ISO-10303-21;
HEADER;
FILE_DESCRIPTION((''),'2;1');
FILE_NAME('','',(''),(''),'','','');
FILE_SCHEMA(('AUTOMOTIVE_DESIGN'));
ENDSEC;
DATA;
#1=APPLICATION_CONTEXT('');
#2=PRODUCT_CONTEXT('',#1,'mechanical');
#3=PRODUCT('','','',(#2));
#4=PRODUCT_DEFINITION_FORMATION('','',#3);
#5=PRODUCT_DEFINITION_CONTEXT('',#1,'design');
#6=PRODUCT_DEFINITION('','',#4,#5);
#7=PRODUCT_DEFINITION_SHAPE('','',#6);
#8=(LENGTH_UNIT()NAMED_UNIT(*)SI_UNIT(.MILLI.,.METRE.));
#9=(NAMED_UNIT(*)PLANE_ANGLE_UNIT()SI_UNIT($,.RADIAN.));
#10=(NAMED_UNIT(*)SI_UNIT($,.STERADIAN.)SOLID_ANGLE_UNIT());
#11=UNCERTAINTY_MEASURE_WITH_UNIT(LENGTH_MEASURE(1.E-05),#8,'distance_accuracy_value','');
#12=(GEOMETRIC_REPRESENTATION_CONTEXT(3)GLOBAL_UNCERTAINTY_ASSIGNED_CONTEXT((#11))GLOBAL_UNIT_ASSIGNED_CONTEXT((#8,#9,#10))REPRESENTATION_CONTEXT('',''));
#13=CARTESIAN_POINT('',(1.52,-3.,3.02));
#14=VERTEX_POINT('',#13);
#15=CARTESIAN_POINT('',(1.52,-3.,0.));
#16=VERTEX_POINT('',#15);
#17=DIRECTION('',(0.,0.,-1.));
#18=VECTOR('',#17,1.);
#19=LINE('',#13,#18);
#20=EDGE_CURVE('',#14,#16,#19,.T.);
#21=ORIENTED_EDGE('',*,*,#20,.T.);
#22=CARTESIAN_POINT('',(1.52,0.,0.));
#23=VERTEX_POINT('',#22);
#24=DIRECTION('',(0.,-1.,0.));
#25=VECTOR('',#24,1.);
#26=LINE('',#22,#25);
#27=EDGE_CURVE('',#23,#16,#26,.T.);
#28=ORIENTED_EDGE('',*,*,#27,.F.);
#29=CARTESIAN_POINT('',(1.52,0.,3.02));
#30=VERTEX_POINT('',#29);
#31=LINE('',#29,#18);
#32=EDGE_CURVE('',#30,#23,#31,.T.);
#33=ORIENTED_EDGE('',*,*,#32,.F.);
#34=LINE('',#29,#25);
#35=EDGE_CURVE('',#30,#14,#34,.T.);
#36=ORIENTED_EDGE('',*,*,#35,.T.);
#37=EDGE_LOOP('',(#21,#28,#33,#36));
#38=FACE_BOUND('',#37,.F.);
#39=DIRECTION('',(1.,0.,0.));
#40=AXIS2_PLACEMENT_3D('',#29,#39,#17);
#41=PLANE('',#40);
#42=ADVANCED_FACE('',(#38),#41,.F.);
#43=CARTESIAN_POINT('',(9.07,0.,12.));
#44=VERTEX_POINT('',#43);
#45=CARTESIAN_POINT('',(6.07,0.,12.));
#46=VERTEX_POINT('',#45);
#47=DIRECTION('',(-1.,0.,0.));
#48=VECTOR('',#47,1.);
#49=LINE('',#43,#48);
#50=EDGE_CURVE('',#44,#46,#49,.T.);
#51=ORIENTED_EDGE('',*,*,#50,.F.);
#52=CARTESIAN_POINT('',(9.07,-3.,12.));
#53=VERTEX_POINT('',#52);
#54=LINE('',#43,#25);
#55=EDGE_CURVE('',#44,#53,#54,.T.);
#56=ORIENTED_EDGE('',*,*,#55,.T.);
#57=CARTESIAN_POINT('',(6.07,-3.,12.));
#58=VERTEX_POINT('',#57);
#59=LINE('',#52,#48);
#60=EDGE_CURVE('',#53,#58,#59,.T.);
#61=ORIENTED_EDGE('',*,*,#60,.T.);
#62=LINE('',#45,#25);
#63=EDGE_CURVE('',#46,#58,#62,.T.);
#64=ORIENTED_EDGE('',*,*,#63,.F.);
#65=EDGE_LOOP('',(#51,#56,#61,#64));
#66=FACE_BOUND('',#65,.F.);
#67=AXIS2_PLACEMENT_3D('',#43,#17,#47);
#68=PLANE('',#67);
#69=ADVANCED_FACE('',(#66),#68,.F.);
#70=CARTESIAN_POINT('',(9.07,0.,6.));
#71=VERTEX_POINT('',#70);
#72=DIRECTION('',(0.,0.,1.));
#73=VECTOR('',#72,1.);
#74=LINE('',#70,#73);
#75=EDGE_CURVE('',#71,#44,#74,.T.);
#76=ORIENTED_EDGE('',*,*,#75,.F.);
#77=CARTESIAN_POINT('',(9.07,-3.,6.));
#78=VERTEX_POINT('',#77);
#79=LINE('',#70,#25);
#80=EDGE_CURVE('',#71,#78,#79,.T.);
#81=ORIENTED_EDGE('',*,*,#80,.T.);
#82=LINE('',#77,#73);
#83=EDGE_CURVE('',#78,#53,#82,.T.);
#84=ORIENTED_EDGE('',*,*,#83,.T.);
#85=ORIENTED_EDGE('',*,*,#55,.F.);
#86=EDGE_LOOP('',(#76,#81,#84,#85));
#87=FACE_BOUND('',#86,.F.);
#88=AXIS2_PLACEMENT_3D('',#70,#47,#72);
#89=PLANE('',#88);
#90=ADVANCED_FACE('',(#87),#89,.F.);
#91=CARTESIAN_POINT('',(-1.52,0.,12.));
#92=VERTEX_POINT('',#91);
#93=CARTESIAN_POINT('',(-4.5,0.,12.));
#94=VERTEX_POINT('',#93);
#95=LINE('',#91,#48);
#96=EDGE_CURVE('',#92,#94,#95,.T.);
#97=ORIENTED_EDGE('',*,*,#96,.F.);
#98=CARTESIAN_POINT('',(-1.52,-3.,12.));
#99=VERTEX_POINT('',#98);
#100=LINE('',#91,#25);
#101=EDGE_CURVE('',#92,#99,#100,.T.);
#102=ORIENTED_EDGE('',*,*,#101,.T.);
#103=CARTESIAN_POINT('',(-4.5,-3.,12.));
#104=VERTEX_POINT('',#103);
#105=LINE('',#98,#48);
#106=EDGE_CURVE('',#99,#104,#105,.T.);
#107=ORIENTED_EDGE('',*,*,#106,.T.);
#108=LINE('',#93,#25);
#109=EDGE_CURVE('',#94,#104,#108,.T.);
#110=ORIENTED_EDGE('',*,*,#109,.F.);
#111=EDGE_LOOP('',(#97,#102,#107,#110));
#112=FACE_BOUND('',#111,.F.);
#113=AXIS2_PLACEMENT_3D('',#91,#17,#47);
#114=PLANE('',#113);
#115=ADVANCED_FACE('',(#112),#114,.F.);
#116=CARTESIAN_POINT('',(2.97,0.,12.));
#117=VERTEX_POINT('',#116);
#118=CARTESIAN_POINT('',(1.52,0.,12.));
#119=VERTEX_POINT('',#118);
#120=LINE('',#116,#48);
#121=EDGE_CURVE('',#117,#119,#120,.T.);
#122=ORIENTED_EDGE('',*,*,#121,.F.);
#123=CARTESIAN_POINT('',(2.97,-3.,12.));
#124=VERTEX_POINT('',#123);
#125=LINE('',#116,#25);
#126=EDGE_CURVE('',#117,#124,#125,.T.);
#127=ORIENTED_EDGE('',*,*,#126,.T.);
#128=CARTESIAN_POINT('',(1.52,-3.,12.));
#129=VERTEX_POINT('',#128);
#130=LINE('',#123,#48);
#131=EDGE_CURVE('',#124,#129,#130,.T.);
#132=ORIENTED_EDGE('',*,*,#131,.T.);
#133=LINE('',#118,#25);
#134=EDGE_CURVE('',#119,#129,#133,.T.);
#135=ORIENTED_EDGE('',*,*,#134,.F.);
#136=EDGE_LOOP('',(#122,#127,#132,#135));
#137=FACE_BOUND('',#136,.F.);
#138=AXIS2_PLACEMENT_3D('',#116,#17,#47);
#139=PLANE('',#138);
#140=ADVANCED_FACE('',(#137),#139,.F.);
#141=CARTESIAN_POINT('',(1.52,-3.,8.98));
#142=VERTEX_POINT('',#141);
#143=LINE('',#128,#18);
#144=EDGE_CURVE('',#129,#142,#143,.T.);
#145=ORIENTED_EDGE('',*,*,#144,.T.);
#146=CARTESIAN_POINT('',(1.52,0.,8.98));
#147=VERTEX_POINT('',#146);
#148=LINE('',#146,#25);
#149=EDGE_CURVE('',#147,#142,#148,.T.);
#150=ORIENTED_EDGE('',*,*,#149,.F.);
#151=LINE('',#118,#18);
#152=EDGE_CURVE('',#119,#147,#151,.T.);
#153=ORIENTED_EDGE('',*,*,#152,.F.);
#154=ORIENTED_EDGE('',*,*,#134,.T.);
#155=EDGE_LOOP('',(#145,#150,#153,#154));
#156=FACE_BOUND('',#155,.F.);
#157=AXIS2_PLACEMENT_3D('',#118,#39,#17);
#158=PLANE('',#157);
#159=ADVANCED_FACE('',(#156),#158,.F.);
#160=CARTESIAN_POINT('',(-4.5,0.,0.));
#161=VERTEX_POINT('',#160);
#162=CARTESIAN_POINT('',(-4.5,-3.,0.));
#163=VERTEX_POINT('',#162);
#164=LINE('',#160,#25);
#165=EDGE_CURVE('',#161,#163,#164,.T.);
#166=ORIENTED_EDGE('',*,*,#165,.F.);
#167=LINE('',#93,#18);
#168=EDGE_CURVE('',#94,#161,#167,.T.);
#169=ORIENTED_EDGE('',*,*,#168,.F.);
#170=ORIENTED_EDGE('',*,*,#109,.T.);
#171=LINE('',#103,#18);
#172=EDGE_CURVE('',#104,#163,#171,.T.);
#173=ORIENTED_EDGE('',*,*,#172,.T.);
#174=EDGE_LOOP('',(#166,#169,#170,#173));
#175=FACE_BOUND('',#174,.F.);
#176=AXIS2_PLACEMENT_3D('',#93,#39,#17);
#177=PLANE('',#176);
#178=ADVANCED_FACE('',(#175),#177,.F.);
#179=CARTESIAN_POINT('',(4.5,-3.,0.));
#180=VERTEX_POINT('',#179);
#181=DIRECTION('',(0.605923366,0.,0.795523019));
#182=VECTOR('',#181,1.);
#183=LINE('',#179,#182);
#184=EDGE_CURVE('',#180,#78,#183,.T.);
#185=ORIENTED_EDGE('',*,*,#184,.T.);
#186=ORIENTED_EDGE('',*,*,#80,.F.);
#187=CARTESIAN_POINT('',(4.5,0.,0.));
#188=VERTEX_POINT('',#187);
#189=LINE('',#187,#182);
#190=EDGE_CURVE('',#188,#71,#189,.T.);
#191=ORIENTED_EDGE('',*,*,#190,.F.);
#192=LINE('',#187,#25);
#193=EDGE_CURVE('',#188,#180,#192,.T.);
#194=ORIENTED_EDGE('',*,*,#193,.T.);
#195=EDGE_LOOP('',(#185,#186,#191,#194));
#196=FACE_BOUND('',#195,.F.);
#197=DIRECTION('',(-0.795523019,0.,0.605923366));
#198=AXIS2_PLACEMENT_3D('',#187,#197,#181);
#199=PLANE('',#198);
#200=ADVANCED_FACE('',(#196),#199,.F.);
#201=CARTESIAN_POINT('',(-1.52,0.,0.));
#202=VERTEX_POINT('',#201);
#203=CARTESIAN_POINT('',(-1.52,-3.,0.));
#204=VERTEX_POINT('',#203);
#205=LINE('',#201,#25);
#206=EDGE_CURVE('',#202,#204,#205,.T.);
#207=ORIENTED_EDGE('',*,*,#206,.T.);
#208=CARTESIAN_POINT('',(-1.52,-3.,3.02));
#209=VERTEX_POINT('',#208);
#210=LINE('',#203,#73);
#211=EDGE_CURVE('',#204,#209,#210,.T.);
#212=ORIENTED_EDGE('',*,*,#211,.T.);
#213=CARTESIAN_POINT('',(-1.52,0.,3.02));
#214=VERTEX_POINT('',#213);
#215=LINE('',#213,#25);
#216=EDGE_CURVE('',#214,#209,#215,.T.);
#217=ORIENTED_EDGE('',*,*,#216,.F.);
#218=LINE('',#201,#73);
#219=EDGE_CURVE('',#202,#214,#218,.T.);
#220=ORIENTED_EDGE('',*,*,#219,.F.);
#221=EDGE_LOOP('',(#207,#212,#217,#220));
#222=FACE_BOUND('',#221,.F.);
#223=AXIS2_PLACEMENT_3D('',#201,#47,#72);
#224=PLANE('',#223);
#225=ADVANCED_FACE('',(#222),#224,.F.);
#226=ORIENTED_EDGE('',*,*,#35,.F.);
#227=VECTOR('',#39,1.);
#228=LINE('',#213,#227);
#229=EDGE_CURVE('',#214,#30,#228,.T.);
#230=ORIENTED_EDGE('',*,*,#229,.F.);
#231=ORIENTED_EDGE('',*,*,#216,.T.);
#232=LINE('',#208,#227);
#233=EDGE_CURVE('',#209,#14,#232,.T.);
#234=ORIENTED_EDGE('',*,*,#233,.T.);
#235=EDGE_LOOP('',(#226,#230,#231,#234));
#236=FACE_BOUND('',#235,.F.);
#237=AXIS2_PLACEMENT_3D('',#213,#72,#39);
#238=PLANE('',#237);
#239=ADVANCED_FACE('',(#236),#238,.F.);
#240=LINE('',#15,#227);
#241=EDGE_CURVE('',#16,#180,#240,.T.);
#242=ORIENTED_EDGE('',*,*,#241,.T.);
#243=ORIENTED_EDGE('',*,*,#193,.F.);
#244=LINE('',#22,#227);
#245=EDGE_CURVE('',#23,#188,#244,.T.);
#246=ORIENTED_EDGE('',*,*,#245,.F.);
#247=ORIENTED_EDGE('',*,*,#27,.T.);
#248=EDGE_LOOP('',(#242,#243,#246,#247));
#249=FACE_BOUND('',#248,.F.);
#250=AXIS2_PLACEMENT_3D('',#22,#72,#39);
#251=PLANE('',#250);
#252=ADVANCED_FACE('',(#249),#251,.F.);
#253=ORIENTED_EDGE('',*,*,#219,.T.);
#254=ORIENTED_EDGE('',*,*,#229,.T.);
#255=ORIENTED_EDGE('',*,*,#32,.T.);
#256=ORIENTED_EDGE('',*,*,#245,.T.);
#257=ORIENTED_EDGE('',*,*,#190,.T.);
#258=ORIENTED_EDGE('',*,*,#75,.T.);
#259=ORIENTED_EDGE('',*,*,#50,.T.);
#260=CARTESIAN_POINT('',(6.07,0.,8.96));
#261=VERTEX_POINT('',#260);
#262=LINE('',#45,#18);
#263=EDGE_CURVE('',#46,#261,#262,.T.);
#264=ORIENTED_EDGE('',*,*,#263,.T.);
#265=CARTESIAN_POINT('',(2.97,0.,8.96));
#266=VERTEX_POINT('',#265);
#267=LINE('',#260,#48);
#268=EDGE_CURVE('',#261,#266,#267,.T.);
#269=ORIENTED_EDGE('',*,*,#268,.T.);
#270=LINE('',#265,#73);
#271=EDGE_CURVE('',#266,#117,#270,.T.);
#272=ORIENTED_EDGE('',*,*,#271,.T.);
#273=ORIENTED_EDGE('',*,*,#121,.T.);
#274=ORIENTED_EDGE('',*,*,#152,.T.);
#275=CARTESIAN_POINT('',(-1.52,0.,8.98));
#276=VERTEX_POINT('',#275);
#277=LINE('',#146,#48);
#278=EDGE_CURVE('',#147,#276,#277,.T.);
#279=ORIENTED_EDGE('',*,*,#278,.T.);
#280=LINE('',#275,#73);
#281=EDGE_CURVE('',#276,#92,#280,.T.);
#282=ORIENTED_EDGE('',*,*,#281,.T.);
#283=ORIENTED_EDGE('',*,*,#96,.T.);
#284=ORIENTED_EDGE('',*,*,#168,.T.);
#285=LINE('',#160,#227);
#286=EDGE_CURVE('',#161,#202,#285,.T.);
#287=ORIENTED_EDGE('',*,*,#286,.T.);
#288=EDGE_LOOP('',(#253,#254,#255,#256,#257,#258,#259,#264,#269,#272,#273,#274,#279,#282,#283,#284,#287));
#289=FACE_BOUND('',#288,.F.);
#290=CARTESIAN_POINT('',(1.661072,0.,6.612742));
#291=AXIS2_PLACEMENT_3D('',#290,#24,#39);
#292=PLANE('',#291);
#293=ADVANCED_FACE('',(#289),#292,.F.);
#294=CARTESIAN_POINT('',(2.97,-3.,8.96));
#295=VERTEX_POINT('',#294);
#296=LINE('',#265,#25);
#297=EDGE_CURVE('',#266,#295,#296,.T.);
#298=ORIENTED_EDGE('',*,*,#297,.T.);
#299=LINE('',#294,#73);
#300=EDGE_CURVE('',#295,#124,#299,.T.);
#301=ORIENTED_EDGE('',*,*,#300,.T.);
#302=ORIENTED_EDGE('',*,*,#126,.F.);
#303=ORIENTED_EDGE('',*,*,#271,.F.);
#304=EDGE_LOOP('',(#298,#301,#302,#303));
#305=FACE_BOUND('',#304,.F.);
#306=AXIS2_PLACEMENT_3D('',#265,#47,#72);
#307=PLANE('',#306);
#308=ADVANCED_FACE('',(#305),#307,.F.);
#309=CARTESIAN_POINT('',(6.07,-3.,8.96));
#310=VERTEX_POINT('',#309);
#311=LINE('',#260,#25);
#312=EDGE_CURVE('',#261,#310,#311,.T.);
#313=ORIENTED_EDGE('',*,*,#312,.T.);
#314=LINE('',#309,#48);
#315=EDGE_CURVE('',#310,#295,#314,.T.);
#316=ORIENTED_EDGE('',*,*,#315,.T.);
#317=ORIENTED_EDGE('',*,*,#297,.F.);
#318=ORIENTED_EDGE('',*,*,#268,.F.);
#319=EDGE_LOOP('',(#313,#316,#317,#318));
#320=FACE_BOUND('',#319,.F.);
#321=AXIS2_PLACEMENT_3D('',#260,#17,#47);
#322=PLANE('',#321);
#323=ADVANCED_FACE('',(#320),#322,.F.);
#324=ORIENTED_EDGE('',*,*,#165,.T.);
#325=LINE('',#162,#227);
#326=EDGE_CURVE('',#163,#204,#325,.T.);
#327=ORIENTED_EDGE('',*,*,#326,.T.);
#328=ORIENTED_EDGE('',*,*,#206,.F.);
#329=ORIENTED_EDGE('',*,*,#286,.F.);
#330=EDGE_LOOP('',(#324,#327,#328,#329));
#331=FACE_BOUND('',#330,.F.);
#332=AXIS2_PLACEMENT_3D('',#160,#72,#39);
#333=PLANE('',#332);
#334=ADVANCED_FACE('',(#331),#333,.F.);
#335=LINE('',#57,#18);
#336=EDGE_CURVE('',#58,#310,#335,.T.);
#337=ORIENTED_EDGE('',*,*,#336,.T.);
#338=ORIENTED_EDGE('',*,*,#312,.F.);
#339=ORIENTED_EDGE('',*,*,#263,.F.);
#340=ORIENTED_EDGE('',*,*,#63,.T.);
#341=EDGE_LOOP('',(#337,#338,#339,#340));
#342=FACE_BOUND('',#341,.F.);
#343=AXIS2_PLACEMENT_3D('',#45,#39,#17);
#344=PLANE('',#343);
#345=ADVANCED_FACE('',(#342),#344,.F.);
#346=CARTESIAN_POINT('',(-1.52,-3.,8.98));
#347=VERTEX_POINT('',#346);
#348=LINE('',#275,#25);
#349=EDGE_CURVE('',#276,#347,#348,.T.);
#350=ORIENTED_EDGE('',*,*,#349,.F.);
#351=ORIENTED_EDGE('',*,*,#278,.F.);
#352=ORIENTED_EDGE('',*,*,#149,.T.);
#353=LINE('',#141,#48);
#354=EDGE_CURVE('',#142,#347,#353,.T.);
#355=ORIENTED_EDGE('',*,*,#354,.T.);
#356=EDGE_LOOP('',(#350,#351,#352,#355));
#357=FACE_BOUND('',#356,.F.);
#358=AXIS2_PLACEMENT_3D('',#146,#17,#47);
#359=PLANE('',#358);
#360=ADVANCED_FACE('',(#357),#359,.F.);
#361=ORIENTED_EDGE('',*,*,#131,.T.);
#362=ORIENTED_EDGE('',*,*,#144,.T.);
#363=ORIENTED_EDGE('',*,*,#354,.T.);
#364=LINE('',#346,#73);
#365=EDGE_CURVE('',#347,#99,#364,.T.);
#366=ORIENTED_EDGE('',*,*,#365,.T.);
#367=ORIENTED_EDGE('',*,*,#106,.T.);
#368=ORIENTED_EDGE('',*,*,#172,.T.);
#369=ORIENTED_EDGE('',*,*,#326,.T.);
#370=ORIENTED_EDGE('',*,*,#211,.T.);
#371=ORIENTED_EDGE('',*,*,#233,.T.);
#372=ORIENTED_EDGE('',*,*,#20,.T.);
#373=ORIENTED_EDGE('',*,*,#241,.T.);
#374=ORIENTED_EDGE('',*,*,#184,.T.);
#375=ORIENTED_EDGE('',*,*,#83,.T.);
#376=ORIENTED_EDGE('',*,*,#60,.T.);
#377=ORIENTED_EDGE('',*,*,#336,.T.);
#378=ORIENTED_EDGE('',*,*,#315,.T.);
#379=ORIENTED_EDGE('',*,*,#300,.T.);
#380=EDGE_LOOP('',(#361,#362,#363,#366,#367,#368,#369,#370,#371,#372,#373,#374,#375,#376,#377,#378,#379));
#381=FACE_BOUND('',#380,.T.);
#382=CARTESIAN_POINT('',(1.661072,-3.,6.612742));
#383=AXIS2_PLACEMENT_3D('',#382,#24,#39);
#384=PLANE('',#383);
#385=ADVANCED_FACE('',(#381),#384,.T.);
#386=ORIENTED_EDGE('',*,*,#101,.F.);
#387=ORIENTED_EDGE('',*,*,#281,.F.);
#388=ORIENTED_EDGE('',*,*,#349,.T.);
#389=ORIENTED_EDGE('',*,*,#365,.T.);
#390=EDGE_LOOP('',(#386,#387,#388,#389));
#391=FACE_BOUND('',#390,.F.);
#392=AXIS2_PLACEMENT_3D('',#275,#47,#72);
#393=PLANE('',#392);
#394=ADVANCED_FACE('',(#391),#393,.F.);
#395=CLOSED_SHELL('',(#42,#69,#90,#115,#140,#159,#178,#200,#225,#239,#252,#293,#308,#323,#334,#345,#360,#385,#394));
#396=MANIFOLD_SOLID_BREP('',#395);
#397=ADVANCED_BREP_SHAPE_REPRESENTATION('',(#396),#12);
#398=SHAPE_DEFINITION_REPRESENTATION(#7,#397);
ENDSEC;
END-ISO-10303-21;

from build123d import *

# Parameters (mm, degrees)
F1_DEPTH = 3


# Not quite as in the source:
# - a feature names something its author has since deleted; it is built from what else it names


with BuildPart() as f1:
    # F0 (on Front) → F1 (new body)
    with BuildSketch(Plane.XZ):
        Polygon((1.52, 0), (4.5, 0), (9.07, 6), (9.07, 12), (6.07, 12), (6.07, 8.96), (2.97, 8.96), (2.97, 12), (1.52, 12), (1.52, 8.98), (-1.52, 8.98), (-1.52, 12), (-4.5, 12), (-4.5, 0), (-1.52, 0), (-1.52, 3.02), (1.52, 3.02), align=None)
    extrude(amount=F1_DEPTH)


solid = f1.part
